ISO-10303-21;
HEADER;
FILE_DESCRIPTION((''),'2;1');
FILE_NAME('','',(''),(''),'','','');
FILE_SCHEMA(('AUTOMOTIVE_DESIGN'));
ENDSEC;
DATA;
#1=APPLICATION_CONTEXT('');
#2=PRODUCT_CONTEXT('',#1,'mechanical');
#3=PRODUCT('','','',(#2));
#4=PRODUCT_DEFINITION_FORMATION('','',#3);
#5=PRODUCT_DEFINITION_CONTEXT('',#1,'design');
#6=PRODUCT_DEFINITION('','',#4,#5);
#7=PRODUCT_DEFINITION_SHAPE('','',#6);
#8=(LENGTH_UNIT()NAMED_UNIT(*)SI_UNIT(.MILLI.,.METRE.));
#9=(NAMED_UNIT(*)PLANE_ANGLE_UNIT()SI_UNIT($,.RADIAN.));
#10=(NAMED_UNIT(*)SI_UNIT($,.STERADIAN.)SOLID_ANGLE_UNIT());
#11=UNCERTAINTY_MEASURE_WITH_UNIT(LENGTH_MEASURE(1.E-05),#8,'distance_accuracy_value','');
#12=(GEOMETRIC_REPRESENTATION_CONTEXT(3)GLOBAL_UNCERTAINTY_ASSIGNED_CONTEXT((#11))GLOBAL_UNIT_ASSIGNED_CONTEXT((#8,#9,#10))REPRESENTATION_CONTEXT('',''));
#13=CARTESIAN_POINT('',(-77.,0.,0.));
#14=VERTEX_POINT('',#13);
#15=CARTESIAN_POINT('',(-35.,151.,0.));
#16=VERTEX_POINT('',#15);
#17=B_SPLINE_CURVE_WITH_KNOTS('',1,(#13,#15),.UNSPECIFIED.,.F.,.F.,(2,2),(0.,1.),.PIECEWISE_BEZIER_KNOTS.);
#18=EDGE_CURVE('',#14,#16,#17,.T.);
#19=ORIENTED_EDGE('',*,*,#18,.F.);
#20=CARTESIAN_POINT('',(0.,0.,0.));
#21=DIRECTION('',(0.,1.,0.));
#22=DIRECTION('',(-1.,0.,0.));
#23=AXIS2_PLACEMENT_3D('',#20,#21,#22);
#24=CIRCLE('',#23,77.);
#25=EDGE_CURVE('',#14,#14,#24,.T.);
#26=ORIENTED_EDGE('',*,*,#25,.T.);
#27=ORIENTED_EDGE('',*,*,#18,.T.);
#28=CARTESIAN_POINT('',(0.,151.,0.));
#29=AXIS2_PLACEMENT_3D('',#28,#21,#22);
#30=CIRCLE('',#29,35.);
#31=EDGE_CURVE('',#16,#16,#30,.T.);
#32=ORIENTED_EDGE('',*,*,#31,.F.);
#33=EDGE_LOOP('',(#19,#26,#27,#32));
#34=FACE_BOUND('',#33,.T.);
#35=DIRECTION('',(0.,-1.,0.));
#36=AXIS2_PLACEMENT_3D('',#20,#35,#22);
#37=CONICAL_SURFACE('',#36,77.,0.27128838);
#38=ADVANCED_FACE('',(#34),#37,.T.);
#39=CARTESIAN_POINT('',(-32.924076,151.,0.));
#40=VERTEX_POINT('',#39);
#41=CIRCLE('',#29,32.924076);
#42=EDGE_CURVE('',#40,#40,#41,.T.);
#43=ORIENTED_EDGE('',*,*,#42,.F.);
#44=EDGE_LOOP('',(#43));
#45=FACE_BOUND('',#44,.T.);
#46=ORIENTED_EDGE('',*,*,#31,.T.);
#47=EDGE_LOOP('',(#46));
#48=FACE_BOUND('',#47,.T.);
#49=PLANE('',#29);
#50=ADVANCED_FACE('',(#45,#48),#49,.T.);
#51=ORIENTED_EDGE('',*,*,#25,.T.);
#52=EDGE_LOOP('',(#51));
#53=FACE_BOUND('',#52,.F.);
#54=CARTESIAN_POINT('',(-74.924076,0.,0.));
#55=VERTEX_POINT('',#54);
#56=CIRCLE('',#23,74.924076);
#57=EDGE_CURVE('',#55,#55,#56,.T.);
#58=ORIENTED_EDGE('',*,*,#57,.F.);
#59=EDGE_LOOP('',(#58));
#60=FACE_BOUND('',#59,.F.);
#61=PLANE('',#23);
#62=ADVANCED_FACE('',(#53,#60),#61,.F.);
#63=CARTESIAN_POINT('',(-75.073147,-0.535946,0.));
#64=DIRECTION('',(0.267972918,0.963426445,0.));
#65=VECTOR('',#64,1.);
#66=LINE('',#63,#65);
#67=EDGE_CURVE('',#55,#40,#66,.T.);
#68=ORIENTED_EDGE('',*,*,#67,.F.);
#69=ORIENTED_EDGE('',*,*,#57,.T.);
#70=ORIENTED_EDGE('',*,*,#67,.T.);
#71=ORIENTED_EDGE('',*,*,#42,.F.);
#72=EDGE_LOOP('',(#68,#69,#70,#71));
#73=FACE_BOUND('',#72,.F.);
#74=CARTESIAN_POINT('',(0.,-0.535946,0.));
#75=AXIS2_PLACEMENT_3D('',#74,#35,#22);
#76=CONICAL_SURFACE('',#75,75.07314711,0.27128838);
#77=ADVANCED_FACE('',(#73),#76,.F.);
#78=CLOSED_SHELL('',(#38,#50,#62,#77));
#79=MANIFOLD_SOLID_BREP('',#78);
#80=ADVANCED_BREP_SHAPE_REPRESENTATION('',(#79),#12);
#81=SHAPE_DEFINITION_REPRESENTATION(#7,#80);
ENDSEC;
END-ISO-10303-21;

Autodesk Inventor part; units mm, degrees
ref_plane "YZ Plane" through (0, 0, 0) normal (1, 0, 0) x (0, 1, 0)
ref_plane "XY Plane" through (0, 0, 0) normal (0, 0, 1) x (1, 0, 0)
sketch "Szkic6" plane through (0, 0, 0) normal (0, 1, 0) x (-1, 0, 0)
  circle A0 centre (0, 0) radius 77
  dimension "d33" = 154
ref_plane "Płaszczyzna konstrukcyjna1" through (0, 151, 0) normal (0, 1, 0) x (-1, 0, 0)
sketch "Szkic7" plane through (0, 151, 0) normal (0, 1, 0) x (-1, 0, 0)
  circle A0 centre (0, 0) radius 35
  dimension "d35" = 70
loft "Wyciągnięcie złożone1" add profiles "Szkic6", "Szkic7"
shell "Skorupa1" thickness 2 removed faces 2 at (1.9985, 151, 11.019) at (-23.2587, 0, 21.3864)
equation "\"d33\" = OD1"
equation "\"d35\" = OD2"
equation "\"d52\" = THK"
equation "\"SzerokośćGięciaPodcięcia\" = Grubość"
equation "\"RozmiarPodcięciaNarożnika\" = 4 * Grubość"
equation "\"PromieńPrzejścia\" = PromieńGięcia"
equation "\"Rozmiar_promienia_Jacobiego\" = PromieńGięcia"
equation "\"Wielk_odstępu\" = Grubość"
equation "\"d2\" = PromieńGięcia"
equation "\"d23\" = PromieńGięcia"
equation "\"OD1\" = 154"
equation "\"OD2\" = 70"
equation "\"L\" = 151"
equation "\"THK\" = 2"
equation "\"d34\" = L"
equation "\"Grubość\" = 1.5"
equation "\"PromieńGięcia\" = 3"
properties part number "Redukcja symetryczna Ø154x70x2 L=151" material "304"
